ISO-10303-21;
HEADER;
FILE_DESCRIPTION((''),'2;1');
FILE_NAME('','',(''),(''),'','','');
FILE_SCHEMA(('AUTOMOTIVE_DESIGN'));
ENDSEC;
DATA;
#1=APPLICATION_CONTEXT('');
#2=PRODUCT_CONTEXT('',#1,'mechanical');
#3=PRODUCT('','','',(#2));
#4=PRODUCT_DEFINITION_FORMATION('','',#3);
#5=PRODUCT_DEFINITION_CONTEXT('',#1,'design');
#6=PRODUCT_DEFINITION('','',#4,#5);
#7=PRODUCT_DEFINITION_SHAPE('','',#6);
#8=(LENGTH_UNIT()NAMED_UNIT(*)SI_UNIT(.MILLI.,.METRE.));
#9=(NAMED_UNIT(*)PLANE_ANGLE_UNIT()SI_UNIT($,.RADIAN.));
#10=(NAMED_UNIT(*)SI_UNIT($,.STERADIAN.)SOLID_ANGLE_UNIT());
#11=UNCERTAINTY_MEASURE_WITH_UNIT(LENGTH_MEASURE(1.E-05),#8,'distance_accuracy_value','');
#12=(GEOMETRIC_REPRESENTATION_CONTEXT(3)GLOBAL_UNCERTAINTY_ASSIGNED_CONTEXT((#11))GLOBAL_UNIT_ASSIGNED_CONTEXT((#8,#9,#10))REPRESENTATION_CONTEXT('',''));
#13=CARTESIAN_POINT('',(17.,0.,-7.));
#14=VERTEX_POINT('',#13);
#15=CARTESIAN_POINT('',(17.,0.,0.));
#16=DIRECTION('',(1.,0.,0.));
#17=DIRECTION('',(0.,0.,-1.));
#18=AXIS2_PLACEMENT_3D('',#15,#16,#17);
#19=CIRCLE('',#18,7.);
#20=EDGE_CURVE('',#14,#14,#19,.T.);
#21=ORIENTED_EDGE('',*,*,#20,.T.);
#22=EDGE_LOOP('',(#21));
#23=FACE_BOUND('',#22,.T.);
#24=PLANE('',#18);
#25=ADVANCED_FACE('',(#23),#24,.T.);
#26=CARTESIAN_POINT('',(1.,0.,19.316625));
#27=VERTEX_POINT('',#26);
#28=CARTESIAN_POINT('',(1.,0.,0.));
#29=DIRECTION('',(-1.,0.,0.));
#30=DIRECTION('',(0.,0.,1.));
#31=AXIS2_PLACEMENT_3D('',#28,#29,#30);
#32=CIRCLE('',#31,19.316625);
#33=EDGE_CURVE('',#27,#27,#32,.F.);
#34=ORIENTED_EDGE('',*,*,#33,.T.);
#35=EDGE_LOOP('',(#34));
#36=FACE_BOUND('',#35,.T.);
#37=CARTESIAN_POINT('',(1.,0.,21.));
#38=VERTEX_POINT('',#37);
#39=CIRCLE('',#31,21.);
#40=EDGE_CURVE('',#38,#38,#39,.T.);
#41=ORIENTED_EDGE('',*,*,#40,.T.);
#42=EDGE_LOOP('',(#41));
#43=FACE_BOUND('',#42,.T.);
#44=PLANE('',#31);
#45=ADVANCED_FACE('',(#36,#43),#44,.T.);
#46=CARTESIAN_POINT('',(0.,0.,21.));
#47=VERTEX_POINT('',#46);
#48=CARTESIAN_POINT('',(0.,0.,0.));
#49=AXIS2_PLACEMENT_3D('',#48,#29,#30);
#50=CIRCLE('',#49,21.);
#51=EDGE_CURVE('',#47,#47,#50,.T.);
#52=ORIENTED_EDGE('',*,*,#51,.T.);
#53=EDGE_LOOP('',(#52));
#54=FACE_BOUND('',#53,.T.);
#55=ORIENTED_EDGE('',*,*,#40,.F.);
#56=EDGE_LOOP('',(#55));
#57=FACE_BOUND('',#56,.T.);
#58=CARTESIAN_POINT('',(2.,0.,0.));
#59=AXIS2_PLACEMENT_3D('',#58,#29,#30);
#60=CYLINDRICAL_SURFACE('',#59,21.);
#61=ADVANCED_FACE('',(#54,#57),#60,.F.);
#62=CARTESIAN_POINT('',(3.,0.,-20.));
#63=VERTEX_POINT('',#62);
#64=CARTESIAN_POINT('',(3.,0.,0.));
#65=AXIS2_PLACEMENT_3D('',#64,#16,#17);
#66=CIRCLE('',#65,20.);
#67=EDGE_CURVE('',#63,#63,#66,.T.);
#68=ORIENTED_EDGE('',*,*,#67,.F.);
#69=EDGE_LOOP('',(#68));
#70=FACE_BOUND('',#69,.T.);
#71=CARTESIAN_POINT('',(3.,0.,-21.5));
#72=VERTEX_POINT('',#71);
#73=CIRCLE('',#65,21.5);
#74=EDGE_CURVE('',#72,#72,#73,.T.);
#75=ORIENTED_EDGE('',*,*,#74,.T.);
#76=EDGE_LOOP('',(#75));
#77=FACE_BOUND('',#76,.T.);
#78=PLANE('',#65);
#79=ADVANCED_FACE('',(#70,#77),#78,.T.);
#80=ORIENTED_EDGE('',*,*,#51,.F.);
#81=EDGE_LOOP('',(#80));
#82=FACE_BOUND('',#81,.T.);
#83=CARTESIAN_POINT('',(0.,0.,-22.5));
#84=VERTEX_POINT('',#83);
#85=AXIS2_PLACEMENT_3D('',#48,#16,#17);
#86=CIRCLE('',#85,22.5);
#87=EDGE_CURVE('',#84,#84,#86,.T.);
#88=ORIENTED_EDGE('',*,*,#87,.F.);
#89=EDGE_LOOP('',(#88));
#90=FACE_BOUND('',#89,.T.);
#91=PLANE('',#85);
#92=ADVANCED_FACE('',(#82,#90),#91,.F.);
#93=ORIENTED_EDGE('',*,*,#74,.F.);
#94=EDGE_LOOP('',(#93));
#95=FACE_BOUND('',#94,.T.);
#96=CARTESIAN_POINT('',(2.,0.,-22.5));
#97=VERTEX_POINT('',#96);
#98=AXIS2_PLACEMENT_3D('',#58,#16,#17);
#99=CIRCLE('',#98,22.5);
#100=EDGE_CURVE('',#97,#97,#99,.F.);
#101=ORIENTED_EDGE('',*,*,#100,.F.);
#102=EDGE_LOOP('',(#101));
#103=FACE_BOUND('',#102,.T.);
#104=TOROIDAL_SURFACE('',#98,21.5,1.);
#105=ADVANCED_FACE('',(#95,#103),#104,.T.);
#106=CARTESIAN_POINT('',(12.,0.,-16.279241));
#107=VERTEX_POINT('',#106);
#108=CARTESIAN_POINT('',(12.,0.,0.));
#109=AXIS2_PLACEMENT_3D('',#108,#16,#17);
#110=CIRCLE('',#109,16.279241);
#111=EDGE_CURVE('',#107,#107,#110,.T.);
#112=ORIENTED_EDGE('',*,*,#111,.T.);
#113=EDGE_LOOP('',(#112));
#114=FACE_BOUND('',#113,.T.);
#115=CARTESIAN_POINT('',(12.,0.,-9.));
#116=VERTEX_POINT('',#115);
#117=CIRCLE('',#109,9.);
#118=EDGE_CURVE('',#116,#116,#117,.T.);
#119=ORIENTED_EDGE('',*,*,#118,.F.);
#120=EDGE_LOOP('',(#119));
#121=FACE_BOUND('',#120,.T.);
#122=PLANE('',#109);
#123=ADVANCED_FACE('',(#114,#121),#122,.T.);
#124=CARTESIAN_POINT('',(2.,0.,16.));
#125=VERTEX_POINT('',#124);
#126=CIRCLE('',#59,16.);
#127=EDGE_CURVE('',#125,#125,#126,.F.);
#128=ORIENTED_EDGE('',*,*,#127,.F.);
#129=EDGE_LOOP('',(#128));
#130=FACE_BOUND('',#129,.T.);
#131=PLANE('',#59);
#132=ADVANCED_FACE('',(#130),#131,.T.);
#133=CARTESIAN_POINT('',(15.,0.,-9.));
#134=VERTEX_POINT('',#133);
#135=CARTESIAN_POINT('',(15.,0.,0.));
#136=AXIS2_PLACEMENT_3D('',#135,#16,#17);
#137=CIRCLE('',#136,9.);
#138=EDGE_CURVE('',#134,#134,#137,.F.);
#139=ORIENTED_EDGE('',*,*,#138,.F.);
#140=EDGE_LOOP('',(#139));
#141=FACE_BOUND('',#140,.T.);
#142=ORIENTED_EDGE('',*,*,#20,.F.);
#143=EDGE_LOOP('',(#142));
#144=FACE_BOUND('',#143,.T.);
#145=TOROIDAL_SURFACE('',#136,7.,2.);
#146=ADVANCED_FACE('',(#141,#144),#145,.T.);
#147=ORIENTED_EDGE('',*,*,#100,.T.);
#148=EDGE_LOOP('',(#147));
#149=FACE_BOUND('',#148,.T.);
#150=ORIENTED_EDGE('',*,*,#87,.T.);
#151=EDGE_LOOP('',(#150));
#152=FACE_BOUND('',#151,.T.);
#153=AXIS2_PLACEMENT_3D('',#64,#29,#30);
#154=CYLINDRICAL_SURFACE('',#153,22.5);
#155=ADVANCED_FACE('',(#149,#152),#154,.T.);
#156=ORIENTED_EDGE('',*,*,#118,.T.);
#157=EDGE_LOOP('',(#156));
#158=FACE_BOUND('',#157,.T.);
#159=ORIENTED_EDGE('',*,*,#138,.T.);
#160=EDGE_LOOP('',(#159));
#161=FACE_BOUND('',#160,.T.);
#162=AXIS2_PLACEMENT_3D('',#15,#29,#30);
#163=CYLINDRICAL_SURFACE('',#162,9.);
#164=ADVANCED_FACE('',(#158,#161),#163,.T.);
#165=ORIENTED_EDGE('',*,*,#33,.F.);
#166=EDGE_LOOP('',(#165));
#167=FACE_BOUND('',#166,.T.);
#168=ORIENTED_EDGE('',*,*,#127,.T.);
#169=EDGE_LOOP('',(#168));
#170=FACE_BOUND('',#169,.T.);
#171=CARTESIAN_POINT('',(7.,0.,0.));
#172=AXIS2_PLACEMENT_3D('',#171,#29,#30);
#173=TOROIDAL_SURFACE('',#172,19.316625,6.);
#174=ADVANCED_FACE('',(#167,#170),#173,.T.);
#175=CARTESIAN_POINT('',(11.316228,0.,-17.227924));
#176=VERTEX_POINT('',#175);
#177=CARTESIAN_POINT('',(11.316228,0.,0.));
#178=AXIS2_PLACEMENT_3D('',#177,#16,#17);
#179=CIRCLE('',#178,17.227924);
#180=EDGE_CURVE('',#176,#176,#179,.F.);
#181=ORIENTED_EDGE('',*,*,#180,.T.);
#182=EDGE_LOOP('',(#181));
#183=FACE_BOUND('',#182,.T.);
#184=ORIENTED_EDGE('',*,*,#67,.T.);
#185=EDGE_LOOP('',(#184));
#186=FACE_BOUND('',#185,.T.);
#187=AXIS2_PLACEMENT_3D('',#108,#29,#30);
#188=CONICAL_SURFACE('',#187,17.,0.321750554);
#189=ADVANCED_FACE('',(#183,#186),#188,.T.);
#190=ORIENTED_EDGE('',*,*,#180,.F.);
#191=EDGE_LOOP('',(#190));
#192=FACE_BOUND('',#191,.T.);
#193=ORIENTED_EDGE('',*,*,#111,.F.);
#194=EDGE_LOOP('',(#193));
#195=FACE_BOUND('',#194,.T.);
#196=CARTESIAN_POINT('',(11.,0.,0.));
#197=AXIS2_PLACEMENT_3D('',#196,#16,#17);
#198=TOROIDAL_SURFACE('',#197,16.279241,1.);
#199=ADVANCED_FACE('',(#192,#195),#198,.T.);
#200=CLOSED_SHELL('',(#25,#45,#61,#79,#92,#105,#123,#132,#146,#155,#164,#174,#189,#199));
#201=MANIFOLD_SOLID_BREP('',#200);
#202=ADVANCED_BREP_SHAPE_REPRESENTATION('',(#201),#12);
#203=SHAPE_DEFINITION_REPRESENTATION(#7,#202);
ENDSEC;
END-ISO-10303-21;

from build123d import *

# Parameters (mm, degrees)
SKETCH1_R           = 22.5
BOSS_EXTRUDE1_DEPTH = 3
SKETCH3_R           = 17
SKETCH2_R           = 20
SKETCH4_R           = 9
BOSS_EXTRUDE2_DEPTH = 5
FILLET1_R           = 2
FILLET2_R           = 1
SKETCH5_R           = 21
CUT_EXTRUDE1_DEPTH  = 2
BOSS_EXTRUDE3_START = 1
SKETCH6_R           = 21
SKETCH6_R_2         = 16
BOSS_EXTRUDE3_DEPTH = 1
FILLET3_R           = 6


with BuildPart() as part:
    # Sketch1 → Boss-Extrude1 (new body)
    with BuildSketch(Plane(origin=(0, 0, 0), x_dir=(0, 0, -1), z_dir=(1, 0, 0))):
        Circle(SKETCH1_R)
    extrude(amount=BOSS_EXTRUDE1_DEPTH)

    # Sketch3 → Loft1 section 0
    with BuildSketch(Plane(origin=(12, 0, 0), x_dir=(0, 0, -1), z_dir=(1, 0, 0))):
        Circle(SKETCH3_R)
    # Sketch2 → Loft1 section 1
    with BuildSketch(Plane(origin=(3, 0, 0), x_dir=(0, 0, -1), z_dir=(1, 0, 0))):
        Circle(SKETCH2_R)
    loft()

    # Sketch4 → Boss-Extrude2 (add)
    with BuildSketch(Plane(origin=(12, 0, 0), x_dir=(0, 0, -1), z_dir=(1, 0, 0))):
        Circle(SKETCH4_R)
    extrude(amount=BOSS_EXTRUDE2_DEPTH)

    # Fillet1
    fillet1_edges = [part.edges().sort_by_distance(p)[0] for p in [
        (17, 0, 9),
    ]]
    fillet(fillet1_edges, radius=FILLET1_R)

    # Fillet2
    fillet2_edges = [part.edges().sort_by_distance(p)[0] for p in [
        (3, 0, 22.5),
        (12, 0, 17),
    ]]
    fillet(fillet2_edges, radius=FILLET2_R)

    # Sketch5 → Cut-Extrude1 (cut)
    with BuildSketch(Plane.ZY):
        Circle(SKETCH5_R)
    extrude(amount=-CUT_EXTRUDE1_DEPTH, mode=Mode.SUBTRACT)

    # Sketch6 → Boss-Extrude3 (add)
    with BuildSketch(Plane.ZY.offset(-2).offset(BOSS_EXTRUDE3_START)):
        Circle(SKETCH6_R)
        Circle(SKETCH6_R_2, mode=Mode.SUBTRACT)
    extrude(amount=-BOSS_EXTRUDE3_DEPTH)

    # Fillet3
    # the kernel refuses this fillet: 6 mm, written as the material it takes off along each edge
    with BuildSketch(Plane(origin=(1, 0, 0), x_dir=(0, 0, 1), z_dir=(0, -1, 0))) as fillet3_piece_1:
        with BuildLine():
            CenterArc((19.31662479, -6), FILLET3_R, 90, 33.557309762)
            Line((16, -1), (16, 0))
            Line((16, 0), (19.31662479, 0))
        make_face()
    revolve(axis=Axis((1, 0, 0), (-1, 0, 0)), mode=Mode.SUBTRACT)


solid = part.part
